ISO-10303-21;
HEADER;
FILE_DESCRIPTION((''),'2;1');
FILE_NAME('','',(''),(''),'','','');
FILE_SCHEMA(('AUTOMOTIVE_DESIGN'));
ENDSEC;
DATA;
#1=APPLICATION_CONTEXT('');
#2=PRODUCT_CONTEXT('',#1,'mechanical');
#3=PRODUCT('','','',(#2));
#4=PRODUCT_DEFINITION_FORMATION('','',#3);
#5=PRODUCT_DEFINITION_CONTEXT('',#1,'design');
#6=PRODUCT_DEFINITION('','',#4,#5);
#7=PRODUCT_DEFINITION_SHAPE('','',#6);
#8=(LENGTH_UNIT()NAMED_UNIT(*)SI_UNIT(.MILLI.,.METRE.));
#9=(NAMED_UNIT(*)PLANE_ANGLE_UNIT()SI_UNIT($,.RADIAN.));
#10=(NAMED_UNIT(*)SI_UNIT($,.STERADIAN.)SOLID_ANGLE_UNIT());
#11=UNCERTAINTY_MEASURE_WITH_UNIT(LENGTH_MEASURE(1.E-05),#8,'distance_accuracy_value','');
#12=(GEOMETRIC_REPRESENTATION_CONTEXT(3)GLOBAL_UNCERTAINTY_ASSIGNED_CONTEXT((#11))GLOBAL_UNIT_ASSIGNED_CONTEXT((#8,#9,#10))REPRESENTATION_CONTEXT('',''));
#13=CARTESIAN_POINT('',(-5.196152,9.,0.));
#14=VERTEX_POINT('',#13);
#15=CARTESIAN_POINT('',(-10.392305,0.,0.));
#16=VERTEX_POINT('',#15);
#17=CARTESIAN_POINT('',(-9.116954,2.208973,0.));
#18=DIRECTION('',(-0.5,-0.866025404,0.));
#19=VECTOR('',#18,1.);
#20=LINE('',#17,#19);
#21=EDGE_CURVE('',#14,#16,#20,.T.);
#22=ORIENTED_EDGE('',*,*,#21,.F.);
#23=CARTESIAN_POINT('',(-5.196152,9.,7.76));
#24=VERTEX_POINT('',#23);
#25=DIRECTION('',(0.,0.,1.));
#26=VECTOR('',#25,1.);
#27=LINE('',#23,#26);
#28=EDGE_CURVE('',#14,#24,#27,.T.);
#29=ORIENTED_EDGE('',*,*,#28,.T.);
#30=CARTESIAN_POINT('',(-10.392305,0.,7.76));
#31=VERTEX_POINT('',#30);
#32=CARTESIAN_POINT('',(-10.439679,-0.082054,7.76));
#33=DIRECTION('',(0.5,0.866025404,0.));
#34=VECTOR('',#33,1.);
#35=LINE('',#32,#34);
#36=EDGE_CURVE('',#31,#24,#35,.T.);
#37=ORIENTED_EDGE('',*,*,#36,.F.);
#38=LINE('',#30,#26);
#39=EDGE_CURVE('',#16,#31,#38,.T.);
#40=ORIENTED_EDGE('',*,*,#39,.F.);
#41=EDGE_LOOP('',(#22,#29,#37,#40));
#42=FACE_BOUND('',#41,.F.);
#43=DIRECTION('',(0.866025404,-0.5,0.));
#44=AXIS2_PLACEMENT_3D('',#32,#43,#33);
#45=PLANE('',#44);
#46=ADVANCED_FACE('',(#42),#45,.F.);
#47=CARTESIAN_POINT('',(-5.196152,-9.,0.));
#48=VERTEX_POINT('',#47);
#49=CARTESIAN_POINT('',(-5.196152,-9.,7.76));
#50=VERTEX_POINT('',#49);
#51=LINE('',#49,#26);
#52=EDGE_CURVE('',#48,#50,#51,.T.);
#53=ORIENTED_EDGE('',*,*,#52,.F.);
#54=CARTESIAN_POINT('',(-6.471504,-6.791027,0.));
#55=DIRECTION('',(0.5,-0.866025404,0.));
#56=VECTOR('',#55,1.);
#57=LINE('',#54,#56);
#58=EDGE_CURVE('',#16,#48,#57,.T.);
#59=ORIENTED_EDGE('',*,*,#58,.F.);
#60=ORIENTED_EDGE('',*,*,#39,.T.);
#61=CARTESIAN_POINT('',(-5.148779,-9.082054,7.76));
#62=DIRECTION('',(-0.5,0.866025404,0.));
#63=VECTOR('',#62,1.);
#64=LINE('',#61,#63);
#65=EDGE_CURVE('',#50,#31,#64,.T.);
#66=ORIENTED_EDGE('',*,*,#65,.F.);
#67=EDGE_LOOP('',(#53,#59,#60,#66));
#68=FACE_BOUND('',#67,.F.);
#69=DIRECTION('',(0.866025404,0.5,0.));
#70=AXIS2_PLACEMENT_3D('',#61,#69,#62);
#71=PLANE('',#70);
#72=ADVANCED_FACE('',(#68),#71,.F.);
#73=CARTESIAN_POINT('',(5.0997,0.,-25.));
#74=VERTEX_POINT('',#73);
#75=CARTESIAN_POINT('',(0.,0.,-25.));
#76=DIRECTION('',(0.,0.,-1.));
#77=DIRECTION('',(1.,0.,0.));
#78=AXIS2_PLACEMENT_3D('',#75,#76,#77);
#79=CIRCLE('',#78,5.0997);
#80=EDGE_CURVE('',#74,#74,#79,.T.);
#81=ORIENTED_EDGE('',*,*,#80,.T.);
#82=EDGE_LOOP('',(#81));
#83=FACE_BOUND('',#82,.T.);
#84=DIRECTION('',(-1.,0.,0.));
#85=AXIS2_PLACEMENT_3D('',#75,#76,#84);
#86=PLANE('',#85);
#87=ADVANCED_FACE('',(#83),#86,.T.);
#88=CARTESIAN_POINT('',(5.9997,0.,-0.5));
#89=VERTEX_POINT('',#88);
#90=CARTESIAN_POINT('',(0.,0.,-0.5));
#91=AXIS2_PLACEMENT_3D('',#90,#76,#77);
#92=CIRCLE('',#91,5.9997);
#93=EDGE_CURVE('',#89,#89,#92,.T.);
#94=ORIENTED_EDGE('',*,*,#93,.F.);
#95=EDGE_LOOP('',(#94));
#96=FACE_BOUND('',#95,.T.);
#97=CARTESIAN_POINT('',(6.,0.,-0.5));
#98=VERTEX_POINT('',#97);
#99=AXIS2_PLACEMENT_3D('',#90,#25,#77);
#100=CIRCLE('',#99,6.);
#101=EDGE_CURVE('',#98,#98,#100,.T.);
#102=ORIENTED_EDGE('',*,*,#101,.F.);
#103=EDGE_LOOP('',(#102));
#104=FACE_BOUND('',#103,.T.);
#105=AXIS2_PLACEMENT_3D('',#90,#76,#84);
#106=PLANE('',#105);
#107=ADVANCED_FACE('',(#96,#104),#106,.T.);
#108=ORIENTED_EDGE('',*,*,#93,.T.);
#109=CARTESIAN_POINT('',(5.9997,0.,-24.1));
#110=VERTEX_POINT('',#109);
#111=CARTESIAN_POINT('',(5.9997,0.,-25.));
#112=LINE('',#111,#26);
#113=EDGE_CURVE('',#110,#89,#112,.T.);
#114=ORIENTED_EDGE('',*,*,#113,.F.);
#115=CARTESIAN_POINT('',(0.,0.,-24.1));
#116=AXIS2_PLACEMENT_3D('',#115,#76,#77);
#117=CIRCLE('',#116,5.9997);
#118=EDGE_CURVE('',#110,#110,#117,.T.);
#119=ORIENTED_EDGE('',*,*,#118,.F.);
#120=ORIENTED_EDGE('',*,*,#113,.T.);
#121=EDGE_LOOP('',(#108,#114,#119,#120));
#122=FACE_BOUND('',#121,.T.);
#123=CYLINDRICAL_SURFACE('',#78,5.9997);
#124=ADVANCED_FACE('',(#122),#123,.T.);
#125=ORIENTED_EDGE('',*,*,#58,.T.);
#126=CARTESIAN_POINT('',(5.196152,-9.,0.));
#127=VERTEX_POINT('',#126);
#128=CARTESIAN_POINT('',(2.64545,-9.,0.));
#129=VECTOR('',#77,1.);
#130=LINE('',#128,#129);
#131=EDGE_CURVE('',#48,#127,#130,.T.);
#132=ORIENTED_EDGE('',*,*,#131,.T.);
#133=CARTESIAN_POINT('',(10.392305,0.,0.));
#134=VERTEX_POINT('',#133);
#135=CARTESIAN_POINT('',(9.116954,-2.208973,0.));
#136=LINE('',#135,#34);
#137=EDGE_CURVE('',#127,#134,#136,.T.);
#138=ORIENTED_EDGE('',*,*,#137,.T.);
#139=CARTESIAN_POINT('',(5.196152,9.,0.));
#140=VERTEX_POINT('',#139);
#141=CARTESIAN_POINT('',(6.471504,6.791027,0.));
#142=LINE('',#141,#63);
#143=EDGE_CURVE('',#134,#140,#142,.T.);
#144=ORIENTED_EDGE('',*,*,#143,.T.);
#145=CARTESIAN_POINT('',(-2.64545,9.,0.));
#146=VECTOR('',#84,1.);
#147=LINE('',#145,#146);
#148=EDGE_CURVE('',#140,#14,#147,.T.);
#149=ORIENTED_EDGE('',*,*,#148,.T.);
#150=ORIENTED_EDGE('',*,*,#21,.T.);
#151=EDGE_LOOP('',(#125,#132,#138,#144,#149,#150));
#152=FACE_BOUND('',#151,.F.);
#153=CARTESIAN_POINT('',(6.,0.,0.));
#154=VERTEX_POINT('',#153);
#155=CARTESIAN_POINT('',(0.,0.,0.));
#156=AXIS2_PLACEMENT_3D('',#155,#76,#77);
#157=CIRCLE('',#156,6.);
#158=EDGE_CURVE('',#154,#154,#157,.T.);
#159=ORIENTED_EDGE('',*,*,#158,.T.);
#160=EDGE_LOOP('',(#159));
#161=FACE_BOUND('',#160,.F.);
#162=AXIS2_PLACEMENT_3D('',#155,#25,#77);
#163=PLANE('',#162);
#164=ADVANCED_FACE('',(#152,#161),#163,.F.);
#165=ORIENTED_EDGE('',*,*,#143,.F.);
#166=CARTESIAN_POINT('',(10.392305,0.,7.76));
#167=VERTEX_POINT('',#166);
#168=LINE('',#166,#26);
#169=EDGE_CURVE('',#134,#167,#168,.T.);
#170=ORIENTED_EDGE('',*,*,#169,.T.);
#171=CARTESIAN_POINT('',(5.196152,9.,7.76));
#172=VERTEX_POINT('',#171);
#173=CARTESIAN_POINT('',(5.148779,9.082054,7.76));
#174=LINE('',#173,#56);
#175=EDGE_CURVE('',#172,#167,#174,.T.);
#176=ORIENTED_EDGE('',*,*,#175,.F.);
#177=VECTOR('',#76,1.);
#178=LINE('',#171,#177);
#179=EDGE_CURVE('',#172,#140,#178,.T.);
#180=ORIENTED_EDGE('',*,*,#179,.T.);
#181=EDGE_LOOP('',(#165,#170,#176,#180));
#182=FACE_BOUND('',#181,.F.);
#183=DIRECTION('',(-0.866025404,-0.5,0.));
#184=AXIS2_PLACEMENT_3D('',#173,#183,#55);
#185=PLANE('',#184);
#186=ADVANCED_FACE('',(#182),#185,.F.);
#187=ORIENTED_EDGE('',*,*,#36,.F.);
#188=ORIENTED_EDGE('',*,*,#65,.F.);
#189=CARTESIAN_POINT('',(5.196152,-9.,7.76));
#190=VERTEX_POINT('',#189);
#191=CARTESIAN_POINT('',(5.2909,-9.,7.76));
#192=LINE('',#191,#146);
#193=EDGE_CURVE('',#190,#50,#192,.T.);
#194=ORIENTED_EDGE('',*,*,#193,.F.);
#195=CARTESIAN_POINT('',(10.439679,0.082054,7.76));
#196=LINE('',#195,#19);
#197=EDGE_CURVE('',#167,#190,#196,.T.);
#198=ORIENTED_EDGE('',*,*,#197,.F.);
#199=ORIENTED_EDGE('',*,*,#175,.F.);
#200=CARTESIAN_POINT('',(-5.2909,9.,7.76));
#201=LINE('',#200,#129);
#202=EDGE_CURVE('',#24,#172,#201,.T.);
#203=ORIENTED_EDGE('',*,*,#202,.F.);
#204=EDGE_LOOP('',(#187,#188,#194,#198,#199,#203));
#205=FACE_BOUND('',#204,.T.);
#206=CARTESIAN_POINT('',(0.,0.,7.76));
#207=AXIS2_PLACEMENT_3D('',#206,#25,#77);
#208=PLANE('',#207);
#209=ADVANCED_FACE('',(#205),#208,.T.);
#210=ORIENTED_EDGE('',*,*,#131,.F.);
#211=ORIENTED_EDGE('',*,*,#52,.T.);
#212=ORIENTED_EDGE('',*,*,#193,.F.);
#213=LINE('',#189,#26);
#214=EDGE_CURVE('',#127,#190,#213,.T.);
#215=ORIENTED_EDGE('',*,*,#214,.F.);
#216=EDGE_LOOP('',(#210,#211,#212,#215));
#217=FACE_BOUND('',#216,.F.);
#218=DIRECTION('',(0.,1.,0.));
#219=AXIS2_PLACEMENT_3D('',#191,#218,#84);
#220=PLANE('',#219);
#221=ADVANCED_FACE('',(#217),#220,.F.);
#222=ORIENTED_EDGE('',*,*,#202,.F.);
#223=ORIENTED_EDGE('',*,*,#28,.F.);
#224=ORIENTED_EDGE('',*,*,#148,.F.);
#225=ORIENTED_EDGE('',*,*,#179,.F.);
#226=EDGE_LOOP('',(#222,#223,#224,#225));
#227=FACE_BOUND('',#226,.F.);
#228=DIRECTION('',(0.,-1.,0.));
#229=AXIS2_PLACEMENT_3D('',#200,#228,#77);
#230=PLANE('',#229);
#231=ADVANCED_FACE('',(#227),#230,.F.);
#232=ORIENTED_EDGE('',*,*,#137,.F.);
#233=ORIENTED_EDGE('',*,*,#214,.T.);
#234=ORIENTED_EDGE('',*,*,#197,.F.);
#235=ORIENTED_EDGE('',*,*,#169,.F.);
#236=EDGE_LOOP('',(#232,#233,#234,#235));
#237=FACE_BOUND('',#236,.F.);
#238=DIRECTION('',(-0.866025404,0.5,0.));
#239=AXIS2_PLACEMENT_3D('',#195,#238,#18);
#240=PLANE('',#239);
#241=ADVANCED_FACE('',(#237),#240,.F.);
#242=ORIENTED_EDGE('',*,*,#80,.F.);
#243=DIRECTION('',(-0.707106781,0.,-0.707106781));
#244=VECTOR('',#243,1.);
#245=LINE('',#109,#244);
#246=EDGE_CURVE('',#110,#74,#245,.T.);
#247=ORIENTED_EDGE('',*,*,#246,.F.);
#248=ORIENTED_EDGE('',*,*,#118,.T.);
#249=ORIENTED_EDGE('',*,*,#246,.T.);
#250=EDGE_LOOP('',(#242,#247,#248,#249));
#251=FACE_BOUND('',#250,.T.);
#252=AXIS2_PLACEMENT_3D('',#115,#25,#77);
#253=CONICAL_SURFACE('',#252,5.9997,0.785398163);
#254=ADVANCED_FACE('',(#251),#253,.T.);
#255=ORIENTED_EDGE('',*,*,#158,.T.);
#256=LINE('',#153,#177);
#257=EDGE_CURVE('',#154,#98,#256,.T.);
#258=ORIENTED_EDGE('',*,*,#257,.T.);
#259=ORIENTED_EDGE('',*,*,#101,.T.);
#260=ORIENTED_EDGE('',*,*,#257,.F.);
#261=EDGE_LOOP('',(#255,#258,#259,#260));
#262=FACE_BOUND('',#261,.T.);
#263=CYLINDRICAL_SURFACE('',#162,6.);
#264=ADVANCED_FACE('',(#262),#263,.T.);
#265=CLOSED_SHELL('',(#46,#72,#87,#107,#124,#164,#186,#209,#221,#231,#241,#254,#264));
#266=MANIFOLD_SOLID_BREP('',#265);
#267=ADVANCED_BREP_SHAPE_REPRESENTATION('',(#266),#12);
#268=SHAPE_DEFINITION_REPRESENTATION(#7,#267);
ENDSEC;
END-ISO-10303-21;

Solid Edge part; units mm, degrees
sketch "Sketch1" plane through (0, 0, 0) normal (0, 0, 1) x (1, 0, 0)
  circle A0 centre (0, 0) radius 10.44
  dimension "D1" = 20.88
extrude "Protrusion1" add sketch "Sketch1" along normal blind 7.76
sketch "Sketch2" plane through (0, 0, 0) normal (0, 0, -1) x (1, 0, 0)
  circle A0 centre (0, 0) radius 6
extrude "Protrusion2" add sketch "Sketch2" along normal blind 25
sketch "Sketch3" plane through (0, 0, -25) normal (0, 0, -1) x (1, 0, 0)
  circle A0 centre (0, 0) radius 5.9997
extrude "Cutout1" cut sketch "Sketch3" against normal blind 24.5 flip side to cut
chamfer "Chamfer_1" distance 0.9 angle 45 1 edges at (-5.9997, 0, -25)
sketch "Sketch4" plane through (0, 0, 7.76) normal (0, 0, 1) x (1, 0, 0)
  line L0 (-5.2909, 9) -> (5.2909, 9)
  dimension "D1" = 18
extrude "Cutout2" cut sketch "Sketch4" against normal up to next material side at (0, 9.05, 7.76)
pattern_circular "Pattern1" count 6 over 360 about axis through (0, 0, 7.76) along (0, 0, 1) of "Cutout2"
properties part number "24103957"
